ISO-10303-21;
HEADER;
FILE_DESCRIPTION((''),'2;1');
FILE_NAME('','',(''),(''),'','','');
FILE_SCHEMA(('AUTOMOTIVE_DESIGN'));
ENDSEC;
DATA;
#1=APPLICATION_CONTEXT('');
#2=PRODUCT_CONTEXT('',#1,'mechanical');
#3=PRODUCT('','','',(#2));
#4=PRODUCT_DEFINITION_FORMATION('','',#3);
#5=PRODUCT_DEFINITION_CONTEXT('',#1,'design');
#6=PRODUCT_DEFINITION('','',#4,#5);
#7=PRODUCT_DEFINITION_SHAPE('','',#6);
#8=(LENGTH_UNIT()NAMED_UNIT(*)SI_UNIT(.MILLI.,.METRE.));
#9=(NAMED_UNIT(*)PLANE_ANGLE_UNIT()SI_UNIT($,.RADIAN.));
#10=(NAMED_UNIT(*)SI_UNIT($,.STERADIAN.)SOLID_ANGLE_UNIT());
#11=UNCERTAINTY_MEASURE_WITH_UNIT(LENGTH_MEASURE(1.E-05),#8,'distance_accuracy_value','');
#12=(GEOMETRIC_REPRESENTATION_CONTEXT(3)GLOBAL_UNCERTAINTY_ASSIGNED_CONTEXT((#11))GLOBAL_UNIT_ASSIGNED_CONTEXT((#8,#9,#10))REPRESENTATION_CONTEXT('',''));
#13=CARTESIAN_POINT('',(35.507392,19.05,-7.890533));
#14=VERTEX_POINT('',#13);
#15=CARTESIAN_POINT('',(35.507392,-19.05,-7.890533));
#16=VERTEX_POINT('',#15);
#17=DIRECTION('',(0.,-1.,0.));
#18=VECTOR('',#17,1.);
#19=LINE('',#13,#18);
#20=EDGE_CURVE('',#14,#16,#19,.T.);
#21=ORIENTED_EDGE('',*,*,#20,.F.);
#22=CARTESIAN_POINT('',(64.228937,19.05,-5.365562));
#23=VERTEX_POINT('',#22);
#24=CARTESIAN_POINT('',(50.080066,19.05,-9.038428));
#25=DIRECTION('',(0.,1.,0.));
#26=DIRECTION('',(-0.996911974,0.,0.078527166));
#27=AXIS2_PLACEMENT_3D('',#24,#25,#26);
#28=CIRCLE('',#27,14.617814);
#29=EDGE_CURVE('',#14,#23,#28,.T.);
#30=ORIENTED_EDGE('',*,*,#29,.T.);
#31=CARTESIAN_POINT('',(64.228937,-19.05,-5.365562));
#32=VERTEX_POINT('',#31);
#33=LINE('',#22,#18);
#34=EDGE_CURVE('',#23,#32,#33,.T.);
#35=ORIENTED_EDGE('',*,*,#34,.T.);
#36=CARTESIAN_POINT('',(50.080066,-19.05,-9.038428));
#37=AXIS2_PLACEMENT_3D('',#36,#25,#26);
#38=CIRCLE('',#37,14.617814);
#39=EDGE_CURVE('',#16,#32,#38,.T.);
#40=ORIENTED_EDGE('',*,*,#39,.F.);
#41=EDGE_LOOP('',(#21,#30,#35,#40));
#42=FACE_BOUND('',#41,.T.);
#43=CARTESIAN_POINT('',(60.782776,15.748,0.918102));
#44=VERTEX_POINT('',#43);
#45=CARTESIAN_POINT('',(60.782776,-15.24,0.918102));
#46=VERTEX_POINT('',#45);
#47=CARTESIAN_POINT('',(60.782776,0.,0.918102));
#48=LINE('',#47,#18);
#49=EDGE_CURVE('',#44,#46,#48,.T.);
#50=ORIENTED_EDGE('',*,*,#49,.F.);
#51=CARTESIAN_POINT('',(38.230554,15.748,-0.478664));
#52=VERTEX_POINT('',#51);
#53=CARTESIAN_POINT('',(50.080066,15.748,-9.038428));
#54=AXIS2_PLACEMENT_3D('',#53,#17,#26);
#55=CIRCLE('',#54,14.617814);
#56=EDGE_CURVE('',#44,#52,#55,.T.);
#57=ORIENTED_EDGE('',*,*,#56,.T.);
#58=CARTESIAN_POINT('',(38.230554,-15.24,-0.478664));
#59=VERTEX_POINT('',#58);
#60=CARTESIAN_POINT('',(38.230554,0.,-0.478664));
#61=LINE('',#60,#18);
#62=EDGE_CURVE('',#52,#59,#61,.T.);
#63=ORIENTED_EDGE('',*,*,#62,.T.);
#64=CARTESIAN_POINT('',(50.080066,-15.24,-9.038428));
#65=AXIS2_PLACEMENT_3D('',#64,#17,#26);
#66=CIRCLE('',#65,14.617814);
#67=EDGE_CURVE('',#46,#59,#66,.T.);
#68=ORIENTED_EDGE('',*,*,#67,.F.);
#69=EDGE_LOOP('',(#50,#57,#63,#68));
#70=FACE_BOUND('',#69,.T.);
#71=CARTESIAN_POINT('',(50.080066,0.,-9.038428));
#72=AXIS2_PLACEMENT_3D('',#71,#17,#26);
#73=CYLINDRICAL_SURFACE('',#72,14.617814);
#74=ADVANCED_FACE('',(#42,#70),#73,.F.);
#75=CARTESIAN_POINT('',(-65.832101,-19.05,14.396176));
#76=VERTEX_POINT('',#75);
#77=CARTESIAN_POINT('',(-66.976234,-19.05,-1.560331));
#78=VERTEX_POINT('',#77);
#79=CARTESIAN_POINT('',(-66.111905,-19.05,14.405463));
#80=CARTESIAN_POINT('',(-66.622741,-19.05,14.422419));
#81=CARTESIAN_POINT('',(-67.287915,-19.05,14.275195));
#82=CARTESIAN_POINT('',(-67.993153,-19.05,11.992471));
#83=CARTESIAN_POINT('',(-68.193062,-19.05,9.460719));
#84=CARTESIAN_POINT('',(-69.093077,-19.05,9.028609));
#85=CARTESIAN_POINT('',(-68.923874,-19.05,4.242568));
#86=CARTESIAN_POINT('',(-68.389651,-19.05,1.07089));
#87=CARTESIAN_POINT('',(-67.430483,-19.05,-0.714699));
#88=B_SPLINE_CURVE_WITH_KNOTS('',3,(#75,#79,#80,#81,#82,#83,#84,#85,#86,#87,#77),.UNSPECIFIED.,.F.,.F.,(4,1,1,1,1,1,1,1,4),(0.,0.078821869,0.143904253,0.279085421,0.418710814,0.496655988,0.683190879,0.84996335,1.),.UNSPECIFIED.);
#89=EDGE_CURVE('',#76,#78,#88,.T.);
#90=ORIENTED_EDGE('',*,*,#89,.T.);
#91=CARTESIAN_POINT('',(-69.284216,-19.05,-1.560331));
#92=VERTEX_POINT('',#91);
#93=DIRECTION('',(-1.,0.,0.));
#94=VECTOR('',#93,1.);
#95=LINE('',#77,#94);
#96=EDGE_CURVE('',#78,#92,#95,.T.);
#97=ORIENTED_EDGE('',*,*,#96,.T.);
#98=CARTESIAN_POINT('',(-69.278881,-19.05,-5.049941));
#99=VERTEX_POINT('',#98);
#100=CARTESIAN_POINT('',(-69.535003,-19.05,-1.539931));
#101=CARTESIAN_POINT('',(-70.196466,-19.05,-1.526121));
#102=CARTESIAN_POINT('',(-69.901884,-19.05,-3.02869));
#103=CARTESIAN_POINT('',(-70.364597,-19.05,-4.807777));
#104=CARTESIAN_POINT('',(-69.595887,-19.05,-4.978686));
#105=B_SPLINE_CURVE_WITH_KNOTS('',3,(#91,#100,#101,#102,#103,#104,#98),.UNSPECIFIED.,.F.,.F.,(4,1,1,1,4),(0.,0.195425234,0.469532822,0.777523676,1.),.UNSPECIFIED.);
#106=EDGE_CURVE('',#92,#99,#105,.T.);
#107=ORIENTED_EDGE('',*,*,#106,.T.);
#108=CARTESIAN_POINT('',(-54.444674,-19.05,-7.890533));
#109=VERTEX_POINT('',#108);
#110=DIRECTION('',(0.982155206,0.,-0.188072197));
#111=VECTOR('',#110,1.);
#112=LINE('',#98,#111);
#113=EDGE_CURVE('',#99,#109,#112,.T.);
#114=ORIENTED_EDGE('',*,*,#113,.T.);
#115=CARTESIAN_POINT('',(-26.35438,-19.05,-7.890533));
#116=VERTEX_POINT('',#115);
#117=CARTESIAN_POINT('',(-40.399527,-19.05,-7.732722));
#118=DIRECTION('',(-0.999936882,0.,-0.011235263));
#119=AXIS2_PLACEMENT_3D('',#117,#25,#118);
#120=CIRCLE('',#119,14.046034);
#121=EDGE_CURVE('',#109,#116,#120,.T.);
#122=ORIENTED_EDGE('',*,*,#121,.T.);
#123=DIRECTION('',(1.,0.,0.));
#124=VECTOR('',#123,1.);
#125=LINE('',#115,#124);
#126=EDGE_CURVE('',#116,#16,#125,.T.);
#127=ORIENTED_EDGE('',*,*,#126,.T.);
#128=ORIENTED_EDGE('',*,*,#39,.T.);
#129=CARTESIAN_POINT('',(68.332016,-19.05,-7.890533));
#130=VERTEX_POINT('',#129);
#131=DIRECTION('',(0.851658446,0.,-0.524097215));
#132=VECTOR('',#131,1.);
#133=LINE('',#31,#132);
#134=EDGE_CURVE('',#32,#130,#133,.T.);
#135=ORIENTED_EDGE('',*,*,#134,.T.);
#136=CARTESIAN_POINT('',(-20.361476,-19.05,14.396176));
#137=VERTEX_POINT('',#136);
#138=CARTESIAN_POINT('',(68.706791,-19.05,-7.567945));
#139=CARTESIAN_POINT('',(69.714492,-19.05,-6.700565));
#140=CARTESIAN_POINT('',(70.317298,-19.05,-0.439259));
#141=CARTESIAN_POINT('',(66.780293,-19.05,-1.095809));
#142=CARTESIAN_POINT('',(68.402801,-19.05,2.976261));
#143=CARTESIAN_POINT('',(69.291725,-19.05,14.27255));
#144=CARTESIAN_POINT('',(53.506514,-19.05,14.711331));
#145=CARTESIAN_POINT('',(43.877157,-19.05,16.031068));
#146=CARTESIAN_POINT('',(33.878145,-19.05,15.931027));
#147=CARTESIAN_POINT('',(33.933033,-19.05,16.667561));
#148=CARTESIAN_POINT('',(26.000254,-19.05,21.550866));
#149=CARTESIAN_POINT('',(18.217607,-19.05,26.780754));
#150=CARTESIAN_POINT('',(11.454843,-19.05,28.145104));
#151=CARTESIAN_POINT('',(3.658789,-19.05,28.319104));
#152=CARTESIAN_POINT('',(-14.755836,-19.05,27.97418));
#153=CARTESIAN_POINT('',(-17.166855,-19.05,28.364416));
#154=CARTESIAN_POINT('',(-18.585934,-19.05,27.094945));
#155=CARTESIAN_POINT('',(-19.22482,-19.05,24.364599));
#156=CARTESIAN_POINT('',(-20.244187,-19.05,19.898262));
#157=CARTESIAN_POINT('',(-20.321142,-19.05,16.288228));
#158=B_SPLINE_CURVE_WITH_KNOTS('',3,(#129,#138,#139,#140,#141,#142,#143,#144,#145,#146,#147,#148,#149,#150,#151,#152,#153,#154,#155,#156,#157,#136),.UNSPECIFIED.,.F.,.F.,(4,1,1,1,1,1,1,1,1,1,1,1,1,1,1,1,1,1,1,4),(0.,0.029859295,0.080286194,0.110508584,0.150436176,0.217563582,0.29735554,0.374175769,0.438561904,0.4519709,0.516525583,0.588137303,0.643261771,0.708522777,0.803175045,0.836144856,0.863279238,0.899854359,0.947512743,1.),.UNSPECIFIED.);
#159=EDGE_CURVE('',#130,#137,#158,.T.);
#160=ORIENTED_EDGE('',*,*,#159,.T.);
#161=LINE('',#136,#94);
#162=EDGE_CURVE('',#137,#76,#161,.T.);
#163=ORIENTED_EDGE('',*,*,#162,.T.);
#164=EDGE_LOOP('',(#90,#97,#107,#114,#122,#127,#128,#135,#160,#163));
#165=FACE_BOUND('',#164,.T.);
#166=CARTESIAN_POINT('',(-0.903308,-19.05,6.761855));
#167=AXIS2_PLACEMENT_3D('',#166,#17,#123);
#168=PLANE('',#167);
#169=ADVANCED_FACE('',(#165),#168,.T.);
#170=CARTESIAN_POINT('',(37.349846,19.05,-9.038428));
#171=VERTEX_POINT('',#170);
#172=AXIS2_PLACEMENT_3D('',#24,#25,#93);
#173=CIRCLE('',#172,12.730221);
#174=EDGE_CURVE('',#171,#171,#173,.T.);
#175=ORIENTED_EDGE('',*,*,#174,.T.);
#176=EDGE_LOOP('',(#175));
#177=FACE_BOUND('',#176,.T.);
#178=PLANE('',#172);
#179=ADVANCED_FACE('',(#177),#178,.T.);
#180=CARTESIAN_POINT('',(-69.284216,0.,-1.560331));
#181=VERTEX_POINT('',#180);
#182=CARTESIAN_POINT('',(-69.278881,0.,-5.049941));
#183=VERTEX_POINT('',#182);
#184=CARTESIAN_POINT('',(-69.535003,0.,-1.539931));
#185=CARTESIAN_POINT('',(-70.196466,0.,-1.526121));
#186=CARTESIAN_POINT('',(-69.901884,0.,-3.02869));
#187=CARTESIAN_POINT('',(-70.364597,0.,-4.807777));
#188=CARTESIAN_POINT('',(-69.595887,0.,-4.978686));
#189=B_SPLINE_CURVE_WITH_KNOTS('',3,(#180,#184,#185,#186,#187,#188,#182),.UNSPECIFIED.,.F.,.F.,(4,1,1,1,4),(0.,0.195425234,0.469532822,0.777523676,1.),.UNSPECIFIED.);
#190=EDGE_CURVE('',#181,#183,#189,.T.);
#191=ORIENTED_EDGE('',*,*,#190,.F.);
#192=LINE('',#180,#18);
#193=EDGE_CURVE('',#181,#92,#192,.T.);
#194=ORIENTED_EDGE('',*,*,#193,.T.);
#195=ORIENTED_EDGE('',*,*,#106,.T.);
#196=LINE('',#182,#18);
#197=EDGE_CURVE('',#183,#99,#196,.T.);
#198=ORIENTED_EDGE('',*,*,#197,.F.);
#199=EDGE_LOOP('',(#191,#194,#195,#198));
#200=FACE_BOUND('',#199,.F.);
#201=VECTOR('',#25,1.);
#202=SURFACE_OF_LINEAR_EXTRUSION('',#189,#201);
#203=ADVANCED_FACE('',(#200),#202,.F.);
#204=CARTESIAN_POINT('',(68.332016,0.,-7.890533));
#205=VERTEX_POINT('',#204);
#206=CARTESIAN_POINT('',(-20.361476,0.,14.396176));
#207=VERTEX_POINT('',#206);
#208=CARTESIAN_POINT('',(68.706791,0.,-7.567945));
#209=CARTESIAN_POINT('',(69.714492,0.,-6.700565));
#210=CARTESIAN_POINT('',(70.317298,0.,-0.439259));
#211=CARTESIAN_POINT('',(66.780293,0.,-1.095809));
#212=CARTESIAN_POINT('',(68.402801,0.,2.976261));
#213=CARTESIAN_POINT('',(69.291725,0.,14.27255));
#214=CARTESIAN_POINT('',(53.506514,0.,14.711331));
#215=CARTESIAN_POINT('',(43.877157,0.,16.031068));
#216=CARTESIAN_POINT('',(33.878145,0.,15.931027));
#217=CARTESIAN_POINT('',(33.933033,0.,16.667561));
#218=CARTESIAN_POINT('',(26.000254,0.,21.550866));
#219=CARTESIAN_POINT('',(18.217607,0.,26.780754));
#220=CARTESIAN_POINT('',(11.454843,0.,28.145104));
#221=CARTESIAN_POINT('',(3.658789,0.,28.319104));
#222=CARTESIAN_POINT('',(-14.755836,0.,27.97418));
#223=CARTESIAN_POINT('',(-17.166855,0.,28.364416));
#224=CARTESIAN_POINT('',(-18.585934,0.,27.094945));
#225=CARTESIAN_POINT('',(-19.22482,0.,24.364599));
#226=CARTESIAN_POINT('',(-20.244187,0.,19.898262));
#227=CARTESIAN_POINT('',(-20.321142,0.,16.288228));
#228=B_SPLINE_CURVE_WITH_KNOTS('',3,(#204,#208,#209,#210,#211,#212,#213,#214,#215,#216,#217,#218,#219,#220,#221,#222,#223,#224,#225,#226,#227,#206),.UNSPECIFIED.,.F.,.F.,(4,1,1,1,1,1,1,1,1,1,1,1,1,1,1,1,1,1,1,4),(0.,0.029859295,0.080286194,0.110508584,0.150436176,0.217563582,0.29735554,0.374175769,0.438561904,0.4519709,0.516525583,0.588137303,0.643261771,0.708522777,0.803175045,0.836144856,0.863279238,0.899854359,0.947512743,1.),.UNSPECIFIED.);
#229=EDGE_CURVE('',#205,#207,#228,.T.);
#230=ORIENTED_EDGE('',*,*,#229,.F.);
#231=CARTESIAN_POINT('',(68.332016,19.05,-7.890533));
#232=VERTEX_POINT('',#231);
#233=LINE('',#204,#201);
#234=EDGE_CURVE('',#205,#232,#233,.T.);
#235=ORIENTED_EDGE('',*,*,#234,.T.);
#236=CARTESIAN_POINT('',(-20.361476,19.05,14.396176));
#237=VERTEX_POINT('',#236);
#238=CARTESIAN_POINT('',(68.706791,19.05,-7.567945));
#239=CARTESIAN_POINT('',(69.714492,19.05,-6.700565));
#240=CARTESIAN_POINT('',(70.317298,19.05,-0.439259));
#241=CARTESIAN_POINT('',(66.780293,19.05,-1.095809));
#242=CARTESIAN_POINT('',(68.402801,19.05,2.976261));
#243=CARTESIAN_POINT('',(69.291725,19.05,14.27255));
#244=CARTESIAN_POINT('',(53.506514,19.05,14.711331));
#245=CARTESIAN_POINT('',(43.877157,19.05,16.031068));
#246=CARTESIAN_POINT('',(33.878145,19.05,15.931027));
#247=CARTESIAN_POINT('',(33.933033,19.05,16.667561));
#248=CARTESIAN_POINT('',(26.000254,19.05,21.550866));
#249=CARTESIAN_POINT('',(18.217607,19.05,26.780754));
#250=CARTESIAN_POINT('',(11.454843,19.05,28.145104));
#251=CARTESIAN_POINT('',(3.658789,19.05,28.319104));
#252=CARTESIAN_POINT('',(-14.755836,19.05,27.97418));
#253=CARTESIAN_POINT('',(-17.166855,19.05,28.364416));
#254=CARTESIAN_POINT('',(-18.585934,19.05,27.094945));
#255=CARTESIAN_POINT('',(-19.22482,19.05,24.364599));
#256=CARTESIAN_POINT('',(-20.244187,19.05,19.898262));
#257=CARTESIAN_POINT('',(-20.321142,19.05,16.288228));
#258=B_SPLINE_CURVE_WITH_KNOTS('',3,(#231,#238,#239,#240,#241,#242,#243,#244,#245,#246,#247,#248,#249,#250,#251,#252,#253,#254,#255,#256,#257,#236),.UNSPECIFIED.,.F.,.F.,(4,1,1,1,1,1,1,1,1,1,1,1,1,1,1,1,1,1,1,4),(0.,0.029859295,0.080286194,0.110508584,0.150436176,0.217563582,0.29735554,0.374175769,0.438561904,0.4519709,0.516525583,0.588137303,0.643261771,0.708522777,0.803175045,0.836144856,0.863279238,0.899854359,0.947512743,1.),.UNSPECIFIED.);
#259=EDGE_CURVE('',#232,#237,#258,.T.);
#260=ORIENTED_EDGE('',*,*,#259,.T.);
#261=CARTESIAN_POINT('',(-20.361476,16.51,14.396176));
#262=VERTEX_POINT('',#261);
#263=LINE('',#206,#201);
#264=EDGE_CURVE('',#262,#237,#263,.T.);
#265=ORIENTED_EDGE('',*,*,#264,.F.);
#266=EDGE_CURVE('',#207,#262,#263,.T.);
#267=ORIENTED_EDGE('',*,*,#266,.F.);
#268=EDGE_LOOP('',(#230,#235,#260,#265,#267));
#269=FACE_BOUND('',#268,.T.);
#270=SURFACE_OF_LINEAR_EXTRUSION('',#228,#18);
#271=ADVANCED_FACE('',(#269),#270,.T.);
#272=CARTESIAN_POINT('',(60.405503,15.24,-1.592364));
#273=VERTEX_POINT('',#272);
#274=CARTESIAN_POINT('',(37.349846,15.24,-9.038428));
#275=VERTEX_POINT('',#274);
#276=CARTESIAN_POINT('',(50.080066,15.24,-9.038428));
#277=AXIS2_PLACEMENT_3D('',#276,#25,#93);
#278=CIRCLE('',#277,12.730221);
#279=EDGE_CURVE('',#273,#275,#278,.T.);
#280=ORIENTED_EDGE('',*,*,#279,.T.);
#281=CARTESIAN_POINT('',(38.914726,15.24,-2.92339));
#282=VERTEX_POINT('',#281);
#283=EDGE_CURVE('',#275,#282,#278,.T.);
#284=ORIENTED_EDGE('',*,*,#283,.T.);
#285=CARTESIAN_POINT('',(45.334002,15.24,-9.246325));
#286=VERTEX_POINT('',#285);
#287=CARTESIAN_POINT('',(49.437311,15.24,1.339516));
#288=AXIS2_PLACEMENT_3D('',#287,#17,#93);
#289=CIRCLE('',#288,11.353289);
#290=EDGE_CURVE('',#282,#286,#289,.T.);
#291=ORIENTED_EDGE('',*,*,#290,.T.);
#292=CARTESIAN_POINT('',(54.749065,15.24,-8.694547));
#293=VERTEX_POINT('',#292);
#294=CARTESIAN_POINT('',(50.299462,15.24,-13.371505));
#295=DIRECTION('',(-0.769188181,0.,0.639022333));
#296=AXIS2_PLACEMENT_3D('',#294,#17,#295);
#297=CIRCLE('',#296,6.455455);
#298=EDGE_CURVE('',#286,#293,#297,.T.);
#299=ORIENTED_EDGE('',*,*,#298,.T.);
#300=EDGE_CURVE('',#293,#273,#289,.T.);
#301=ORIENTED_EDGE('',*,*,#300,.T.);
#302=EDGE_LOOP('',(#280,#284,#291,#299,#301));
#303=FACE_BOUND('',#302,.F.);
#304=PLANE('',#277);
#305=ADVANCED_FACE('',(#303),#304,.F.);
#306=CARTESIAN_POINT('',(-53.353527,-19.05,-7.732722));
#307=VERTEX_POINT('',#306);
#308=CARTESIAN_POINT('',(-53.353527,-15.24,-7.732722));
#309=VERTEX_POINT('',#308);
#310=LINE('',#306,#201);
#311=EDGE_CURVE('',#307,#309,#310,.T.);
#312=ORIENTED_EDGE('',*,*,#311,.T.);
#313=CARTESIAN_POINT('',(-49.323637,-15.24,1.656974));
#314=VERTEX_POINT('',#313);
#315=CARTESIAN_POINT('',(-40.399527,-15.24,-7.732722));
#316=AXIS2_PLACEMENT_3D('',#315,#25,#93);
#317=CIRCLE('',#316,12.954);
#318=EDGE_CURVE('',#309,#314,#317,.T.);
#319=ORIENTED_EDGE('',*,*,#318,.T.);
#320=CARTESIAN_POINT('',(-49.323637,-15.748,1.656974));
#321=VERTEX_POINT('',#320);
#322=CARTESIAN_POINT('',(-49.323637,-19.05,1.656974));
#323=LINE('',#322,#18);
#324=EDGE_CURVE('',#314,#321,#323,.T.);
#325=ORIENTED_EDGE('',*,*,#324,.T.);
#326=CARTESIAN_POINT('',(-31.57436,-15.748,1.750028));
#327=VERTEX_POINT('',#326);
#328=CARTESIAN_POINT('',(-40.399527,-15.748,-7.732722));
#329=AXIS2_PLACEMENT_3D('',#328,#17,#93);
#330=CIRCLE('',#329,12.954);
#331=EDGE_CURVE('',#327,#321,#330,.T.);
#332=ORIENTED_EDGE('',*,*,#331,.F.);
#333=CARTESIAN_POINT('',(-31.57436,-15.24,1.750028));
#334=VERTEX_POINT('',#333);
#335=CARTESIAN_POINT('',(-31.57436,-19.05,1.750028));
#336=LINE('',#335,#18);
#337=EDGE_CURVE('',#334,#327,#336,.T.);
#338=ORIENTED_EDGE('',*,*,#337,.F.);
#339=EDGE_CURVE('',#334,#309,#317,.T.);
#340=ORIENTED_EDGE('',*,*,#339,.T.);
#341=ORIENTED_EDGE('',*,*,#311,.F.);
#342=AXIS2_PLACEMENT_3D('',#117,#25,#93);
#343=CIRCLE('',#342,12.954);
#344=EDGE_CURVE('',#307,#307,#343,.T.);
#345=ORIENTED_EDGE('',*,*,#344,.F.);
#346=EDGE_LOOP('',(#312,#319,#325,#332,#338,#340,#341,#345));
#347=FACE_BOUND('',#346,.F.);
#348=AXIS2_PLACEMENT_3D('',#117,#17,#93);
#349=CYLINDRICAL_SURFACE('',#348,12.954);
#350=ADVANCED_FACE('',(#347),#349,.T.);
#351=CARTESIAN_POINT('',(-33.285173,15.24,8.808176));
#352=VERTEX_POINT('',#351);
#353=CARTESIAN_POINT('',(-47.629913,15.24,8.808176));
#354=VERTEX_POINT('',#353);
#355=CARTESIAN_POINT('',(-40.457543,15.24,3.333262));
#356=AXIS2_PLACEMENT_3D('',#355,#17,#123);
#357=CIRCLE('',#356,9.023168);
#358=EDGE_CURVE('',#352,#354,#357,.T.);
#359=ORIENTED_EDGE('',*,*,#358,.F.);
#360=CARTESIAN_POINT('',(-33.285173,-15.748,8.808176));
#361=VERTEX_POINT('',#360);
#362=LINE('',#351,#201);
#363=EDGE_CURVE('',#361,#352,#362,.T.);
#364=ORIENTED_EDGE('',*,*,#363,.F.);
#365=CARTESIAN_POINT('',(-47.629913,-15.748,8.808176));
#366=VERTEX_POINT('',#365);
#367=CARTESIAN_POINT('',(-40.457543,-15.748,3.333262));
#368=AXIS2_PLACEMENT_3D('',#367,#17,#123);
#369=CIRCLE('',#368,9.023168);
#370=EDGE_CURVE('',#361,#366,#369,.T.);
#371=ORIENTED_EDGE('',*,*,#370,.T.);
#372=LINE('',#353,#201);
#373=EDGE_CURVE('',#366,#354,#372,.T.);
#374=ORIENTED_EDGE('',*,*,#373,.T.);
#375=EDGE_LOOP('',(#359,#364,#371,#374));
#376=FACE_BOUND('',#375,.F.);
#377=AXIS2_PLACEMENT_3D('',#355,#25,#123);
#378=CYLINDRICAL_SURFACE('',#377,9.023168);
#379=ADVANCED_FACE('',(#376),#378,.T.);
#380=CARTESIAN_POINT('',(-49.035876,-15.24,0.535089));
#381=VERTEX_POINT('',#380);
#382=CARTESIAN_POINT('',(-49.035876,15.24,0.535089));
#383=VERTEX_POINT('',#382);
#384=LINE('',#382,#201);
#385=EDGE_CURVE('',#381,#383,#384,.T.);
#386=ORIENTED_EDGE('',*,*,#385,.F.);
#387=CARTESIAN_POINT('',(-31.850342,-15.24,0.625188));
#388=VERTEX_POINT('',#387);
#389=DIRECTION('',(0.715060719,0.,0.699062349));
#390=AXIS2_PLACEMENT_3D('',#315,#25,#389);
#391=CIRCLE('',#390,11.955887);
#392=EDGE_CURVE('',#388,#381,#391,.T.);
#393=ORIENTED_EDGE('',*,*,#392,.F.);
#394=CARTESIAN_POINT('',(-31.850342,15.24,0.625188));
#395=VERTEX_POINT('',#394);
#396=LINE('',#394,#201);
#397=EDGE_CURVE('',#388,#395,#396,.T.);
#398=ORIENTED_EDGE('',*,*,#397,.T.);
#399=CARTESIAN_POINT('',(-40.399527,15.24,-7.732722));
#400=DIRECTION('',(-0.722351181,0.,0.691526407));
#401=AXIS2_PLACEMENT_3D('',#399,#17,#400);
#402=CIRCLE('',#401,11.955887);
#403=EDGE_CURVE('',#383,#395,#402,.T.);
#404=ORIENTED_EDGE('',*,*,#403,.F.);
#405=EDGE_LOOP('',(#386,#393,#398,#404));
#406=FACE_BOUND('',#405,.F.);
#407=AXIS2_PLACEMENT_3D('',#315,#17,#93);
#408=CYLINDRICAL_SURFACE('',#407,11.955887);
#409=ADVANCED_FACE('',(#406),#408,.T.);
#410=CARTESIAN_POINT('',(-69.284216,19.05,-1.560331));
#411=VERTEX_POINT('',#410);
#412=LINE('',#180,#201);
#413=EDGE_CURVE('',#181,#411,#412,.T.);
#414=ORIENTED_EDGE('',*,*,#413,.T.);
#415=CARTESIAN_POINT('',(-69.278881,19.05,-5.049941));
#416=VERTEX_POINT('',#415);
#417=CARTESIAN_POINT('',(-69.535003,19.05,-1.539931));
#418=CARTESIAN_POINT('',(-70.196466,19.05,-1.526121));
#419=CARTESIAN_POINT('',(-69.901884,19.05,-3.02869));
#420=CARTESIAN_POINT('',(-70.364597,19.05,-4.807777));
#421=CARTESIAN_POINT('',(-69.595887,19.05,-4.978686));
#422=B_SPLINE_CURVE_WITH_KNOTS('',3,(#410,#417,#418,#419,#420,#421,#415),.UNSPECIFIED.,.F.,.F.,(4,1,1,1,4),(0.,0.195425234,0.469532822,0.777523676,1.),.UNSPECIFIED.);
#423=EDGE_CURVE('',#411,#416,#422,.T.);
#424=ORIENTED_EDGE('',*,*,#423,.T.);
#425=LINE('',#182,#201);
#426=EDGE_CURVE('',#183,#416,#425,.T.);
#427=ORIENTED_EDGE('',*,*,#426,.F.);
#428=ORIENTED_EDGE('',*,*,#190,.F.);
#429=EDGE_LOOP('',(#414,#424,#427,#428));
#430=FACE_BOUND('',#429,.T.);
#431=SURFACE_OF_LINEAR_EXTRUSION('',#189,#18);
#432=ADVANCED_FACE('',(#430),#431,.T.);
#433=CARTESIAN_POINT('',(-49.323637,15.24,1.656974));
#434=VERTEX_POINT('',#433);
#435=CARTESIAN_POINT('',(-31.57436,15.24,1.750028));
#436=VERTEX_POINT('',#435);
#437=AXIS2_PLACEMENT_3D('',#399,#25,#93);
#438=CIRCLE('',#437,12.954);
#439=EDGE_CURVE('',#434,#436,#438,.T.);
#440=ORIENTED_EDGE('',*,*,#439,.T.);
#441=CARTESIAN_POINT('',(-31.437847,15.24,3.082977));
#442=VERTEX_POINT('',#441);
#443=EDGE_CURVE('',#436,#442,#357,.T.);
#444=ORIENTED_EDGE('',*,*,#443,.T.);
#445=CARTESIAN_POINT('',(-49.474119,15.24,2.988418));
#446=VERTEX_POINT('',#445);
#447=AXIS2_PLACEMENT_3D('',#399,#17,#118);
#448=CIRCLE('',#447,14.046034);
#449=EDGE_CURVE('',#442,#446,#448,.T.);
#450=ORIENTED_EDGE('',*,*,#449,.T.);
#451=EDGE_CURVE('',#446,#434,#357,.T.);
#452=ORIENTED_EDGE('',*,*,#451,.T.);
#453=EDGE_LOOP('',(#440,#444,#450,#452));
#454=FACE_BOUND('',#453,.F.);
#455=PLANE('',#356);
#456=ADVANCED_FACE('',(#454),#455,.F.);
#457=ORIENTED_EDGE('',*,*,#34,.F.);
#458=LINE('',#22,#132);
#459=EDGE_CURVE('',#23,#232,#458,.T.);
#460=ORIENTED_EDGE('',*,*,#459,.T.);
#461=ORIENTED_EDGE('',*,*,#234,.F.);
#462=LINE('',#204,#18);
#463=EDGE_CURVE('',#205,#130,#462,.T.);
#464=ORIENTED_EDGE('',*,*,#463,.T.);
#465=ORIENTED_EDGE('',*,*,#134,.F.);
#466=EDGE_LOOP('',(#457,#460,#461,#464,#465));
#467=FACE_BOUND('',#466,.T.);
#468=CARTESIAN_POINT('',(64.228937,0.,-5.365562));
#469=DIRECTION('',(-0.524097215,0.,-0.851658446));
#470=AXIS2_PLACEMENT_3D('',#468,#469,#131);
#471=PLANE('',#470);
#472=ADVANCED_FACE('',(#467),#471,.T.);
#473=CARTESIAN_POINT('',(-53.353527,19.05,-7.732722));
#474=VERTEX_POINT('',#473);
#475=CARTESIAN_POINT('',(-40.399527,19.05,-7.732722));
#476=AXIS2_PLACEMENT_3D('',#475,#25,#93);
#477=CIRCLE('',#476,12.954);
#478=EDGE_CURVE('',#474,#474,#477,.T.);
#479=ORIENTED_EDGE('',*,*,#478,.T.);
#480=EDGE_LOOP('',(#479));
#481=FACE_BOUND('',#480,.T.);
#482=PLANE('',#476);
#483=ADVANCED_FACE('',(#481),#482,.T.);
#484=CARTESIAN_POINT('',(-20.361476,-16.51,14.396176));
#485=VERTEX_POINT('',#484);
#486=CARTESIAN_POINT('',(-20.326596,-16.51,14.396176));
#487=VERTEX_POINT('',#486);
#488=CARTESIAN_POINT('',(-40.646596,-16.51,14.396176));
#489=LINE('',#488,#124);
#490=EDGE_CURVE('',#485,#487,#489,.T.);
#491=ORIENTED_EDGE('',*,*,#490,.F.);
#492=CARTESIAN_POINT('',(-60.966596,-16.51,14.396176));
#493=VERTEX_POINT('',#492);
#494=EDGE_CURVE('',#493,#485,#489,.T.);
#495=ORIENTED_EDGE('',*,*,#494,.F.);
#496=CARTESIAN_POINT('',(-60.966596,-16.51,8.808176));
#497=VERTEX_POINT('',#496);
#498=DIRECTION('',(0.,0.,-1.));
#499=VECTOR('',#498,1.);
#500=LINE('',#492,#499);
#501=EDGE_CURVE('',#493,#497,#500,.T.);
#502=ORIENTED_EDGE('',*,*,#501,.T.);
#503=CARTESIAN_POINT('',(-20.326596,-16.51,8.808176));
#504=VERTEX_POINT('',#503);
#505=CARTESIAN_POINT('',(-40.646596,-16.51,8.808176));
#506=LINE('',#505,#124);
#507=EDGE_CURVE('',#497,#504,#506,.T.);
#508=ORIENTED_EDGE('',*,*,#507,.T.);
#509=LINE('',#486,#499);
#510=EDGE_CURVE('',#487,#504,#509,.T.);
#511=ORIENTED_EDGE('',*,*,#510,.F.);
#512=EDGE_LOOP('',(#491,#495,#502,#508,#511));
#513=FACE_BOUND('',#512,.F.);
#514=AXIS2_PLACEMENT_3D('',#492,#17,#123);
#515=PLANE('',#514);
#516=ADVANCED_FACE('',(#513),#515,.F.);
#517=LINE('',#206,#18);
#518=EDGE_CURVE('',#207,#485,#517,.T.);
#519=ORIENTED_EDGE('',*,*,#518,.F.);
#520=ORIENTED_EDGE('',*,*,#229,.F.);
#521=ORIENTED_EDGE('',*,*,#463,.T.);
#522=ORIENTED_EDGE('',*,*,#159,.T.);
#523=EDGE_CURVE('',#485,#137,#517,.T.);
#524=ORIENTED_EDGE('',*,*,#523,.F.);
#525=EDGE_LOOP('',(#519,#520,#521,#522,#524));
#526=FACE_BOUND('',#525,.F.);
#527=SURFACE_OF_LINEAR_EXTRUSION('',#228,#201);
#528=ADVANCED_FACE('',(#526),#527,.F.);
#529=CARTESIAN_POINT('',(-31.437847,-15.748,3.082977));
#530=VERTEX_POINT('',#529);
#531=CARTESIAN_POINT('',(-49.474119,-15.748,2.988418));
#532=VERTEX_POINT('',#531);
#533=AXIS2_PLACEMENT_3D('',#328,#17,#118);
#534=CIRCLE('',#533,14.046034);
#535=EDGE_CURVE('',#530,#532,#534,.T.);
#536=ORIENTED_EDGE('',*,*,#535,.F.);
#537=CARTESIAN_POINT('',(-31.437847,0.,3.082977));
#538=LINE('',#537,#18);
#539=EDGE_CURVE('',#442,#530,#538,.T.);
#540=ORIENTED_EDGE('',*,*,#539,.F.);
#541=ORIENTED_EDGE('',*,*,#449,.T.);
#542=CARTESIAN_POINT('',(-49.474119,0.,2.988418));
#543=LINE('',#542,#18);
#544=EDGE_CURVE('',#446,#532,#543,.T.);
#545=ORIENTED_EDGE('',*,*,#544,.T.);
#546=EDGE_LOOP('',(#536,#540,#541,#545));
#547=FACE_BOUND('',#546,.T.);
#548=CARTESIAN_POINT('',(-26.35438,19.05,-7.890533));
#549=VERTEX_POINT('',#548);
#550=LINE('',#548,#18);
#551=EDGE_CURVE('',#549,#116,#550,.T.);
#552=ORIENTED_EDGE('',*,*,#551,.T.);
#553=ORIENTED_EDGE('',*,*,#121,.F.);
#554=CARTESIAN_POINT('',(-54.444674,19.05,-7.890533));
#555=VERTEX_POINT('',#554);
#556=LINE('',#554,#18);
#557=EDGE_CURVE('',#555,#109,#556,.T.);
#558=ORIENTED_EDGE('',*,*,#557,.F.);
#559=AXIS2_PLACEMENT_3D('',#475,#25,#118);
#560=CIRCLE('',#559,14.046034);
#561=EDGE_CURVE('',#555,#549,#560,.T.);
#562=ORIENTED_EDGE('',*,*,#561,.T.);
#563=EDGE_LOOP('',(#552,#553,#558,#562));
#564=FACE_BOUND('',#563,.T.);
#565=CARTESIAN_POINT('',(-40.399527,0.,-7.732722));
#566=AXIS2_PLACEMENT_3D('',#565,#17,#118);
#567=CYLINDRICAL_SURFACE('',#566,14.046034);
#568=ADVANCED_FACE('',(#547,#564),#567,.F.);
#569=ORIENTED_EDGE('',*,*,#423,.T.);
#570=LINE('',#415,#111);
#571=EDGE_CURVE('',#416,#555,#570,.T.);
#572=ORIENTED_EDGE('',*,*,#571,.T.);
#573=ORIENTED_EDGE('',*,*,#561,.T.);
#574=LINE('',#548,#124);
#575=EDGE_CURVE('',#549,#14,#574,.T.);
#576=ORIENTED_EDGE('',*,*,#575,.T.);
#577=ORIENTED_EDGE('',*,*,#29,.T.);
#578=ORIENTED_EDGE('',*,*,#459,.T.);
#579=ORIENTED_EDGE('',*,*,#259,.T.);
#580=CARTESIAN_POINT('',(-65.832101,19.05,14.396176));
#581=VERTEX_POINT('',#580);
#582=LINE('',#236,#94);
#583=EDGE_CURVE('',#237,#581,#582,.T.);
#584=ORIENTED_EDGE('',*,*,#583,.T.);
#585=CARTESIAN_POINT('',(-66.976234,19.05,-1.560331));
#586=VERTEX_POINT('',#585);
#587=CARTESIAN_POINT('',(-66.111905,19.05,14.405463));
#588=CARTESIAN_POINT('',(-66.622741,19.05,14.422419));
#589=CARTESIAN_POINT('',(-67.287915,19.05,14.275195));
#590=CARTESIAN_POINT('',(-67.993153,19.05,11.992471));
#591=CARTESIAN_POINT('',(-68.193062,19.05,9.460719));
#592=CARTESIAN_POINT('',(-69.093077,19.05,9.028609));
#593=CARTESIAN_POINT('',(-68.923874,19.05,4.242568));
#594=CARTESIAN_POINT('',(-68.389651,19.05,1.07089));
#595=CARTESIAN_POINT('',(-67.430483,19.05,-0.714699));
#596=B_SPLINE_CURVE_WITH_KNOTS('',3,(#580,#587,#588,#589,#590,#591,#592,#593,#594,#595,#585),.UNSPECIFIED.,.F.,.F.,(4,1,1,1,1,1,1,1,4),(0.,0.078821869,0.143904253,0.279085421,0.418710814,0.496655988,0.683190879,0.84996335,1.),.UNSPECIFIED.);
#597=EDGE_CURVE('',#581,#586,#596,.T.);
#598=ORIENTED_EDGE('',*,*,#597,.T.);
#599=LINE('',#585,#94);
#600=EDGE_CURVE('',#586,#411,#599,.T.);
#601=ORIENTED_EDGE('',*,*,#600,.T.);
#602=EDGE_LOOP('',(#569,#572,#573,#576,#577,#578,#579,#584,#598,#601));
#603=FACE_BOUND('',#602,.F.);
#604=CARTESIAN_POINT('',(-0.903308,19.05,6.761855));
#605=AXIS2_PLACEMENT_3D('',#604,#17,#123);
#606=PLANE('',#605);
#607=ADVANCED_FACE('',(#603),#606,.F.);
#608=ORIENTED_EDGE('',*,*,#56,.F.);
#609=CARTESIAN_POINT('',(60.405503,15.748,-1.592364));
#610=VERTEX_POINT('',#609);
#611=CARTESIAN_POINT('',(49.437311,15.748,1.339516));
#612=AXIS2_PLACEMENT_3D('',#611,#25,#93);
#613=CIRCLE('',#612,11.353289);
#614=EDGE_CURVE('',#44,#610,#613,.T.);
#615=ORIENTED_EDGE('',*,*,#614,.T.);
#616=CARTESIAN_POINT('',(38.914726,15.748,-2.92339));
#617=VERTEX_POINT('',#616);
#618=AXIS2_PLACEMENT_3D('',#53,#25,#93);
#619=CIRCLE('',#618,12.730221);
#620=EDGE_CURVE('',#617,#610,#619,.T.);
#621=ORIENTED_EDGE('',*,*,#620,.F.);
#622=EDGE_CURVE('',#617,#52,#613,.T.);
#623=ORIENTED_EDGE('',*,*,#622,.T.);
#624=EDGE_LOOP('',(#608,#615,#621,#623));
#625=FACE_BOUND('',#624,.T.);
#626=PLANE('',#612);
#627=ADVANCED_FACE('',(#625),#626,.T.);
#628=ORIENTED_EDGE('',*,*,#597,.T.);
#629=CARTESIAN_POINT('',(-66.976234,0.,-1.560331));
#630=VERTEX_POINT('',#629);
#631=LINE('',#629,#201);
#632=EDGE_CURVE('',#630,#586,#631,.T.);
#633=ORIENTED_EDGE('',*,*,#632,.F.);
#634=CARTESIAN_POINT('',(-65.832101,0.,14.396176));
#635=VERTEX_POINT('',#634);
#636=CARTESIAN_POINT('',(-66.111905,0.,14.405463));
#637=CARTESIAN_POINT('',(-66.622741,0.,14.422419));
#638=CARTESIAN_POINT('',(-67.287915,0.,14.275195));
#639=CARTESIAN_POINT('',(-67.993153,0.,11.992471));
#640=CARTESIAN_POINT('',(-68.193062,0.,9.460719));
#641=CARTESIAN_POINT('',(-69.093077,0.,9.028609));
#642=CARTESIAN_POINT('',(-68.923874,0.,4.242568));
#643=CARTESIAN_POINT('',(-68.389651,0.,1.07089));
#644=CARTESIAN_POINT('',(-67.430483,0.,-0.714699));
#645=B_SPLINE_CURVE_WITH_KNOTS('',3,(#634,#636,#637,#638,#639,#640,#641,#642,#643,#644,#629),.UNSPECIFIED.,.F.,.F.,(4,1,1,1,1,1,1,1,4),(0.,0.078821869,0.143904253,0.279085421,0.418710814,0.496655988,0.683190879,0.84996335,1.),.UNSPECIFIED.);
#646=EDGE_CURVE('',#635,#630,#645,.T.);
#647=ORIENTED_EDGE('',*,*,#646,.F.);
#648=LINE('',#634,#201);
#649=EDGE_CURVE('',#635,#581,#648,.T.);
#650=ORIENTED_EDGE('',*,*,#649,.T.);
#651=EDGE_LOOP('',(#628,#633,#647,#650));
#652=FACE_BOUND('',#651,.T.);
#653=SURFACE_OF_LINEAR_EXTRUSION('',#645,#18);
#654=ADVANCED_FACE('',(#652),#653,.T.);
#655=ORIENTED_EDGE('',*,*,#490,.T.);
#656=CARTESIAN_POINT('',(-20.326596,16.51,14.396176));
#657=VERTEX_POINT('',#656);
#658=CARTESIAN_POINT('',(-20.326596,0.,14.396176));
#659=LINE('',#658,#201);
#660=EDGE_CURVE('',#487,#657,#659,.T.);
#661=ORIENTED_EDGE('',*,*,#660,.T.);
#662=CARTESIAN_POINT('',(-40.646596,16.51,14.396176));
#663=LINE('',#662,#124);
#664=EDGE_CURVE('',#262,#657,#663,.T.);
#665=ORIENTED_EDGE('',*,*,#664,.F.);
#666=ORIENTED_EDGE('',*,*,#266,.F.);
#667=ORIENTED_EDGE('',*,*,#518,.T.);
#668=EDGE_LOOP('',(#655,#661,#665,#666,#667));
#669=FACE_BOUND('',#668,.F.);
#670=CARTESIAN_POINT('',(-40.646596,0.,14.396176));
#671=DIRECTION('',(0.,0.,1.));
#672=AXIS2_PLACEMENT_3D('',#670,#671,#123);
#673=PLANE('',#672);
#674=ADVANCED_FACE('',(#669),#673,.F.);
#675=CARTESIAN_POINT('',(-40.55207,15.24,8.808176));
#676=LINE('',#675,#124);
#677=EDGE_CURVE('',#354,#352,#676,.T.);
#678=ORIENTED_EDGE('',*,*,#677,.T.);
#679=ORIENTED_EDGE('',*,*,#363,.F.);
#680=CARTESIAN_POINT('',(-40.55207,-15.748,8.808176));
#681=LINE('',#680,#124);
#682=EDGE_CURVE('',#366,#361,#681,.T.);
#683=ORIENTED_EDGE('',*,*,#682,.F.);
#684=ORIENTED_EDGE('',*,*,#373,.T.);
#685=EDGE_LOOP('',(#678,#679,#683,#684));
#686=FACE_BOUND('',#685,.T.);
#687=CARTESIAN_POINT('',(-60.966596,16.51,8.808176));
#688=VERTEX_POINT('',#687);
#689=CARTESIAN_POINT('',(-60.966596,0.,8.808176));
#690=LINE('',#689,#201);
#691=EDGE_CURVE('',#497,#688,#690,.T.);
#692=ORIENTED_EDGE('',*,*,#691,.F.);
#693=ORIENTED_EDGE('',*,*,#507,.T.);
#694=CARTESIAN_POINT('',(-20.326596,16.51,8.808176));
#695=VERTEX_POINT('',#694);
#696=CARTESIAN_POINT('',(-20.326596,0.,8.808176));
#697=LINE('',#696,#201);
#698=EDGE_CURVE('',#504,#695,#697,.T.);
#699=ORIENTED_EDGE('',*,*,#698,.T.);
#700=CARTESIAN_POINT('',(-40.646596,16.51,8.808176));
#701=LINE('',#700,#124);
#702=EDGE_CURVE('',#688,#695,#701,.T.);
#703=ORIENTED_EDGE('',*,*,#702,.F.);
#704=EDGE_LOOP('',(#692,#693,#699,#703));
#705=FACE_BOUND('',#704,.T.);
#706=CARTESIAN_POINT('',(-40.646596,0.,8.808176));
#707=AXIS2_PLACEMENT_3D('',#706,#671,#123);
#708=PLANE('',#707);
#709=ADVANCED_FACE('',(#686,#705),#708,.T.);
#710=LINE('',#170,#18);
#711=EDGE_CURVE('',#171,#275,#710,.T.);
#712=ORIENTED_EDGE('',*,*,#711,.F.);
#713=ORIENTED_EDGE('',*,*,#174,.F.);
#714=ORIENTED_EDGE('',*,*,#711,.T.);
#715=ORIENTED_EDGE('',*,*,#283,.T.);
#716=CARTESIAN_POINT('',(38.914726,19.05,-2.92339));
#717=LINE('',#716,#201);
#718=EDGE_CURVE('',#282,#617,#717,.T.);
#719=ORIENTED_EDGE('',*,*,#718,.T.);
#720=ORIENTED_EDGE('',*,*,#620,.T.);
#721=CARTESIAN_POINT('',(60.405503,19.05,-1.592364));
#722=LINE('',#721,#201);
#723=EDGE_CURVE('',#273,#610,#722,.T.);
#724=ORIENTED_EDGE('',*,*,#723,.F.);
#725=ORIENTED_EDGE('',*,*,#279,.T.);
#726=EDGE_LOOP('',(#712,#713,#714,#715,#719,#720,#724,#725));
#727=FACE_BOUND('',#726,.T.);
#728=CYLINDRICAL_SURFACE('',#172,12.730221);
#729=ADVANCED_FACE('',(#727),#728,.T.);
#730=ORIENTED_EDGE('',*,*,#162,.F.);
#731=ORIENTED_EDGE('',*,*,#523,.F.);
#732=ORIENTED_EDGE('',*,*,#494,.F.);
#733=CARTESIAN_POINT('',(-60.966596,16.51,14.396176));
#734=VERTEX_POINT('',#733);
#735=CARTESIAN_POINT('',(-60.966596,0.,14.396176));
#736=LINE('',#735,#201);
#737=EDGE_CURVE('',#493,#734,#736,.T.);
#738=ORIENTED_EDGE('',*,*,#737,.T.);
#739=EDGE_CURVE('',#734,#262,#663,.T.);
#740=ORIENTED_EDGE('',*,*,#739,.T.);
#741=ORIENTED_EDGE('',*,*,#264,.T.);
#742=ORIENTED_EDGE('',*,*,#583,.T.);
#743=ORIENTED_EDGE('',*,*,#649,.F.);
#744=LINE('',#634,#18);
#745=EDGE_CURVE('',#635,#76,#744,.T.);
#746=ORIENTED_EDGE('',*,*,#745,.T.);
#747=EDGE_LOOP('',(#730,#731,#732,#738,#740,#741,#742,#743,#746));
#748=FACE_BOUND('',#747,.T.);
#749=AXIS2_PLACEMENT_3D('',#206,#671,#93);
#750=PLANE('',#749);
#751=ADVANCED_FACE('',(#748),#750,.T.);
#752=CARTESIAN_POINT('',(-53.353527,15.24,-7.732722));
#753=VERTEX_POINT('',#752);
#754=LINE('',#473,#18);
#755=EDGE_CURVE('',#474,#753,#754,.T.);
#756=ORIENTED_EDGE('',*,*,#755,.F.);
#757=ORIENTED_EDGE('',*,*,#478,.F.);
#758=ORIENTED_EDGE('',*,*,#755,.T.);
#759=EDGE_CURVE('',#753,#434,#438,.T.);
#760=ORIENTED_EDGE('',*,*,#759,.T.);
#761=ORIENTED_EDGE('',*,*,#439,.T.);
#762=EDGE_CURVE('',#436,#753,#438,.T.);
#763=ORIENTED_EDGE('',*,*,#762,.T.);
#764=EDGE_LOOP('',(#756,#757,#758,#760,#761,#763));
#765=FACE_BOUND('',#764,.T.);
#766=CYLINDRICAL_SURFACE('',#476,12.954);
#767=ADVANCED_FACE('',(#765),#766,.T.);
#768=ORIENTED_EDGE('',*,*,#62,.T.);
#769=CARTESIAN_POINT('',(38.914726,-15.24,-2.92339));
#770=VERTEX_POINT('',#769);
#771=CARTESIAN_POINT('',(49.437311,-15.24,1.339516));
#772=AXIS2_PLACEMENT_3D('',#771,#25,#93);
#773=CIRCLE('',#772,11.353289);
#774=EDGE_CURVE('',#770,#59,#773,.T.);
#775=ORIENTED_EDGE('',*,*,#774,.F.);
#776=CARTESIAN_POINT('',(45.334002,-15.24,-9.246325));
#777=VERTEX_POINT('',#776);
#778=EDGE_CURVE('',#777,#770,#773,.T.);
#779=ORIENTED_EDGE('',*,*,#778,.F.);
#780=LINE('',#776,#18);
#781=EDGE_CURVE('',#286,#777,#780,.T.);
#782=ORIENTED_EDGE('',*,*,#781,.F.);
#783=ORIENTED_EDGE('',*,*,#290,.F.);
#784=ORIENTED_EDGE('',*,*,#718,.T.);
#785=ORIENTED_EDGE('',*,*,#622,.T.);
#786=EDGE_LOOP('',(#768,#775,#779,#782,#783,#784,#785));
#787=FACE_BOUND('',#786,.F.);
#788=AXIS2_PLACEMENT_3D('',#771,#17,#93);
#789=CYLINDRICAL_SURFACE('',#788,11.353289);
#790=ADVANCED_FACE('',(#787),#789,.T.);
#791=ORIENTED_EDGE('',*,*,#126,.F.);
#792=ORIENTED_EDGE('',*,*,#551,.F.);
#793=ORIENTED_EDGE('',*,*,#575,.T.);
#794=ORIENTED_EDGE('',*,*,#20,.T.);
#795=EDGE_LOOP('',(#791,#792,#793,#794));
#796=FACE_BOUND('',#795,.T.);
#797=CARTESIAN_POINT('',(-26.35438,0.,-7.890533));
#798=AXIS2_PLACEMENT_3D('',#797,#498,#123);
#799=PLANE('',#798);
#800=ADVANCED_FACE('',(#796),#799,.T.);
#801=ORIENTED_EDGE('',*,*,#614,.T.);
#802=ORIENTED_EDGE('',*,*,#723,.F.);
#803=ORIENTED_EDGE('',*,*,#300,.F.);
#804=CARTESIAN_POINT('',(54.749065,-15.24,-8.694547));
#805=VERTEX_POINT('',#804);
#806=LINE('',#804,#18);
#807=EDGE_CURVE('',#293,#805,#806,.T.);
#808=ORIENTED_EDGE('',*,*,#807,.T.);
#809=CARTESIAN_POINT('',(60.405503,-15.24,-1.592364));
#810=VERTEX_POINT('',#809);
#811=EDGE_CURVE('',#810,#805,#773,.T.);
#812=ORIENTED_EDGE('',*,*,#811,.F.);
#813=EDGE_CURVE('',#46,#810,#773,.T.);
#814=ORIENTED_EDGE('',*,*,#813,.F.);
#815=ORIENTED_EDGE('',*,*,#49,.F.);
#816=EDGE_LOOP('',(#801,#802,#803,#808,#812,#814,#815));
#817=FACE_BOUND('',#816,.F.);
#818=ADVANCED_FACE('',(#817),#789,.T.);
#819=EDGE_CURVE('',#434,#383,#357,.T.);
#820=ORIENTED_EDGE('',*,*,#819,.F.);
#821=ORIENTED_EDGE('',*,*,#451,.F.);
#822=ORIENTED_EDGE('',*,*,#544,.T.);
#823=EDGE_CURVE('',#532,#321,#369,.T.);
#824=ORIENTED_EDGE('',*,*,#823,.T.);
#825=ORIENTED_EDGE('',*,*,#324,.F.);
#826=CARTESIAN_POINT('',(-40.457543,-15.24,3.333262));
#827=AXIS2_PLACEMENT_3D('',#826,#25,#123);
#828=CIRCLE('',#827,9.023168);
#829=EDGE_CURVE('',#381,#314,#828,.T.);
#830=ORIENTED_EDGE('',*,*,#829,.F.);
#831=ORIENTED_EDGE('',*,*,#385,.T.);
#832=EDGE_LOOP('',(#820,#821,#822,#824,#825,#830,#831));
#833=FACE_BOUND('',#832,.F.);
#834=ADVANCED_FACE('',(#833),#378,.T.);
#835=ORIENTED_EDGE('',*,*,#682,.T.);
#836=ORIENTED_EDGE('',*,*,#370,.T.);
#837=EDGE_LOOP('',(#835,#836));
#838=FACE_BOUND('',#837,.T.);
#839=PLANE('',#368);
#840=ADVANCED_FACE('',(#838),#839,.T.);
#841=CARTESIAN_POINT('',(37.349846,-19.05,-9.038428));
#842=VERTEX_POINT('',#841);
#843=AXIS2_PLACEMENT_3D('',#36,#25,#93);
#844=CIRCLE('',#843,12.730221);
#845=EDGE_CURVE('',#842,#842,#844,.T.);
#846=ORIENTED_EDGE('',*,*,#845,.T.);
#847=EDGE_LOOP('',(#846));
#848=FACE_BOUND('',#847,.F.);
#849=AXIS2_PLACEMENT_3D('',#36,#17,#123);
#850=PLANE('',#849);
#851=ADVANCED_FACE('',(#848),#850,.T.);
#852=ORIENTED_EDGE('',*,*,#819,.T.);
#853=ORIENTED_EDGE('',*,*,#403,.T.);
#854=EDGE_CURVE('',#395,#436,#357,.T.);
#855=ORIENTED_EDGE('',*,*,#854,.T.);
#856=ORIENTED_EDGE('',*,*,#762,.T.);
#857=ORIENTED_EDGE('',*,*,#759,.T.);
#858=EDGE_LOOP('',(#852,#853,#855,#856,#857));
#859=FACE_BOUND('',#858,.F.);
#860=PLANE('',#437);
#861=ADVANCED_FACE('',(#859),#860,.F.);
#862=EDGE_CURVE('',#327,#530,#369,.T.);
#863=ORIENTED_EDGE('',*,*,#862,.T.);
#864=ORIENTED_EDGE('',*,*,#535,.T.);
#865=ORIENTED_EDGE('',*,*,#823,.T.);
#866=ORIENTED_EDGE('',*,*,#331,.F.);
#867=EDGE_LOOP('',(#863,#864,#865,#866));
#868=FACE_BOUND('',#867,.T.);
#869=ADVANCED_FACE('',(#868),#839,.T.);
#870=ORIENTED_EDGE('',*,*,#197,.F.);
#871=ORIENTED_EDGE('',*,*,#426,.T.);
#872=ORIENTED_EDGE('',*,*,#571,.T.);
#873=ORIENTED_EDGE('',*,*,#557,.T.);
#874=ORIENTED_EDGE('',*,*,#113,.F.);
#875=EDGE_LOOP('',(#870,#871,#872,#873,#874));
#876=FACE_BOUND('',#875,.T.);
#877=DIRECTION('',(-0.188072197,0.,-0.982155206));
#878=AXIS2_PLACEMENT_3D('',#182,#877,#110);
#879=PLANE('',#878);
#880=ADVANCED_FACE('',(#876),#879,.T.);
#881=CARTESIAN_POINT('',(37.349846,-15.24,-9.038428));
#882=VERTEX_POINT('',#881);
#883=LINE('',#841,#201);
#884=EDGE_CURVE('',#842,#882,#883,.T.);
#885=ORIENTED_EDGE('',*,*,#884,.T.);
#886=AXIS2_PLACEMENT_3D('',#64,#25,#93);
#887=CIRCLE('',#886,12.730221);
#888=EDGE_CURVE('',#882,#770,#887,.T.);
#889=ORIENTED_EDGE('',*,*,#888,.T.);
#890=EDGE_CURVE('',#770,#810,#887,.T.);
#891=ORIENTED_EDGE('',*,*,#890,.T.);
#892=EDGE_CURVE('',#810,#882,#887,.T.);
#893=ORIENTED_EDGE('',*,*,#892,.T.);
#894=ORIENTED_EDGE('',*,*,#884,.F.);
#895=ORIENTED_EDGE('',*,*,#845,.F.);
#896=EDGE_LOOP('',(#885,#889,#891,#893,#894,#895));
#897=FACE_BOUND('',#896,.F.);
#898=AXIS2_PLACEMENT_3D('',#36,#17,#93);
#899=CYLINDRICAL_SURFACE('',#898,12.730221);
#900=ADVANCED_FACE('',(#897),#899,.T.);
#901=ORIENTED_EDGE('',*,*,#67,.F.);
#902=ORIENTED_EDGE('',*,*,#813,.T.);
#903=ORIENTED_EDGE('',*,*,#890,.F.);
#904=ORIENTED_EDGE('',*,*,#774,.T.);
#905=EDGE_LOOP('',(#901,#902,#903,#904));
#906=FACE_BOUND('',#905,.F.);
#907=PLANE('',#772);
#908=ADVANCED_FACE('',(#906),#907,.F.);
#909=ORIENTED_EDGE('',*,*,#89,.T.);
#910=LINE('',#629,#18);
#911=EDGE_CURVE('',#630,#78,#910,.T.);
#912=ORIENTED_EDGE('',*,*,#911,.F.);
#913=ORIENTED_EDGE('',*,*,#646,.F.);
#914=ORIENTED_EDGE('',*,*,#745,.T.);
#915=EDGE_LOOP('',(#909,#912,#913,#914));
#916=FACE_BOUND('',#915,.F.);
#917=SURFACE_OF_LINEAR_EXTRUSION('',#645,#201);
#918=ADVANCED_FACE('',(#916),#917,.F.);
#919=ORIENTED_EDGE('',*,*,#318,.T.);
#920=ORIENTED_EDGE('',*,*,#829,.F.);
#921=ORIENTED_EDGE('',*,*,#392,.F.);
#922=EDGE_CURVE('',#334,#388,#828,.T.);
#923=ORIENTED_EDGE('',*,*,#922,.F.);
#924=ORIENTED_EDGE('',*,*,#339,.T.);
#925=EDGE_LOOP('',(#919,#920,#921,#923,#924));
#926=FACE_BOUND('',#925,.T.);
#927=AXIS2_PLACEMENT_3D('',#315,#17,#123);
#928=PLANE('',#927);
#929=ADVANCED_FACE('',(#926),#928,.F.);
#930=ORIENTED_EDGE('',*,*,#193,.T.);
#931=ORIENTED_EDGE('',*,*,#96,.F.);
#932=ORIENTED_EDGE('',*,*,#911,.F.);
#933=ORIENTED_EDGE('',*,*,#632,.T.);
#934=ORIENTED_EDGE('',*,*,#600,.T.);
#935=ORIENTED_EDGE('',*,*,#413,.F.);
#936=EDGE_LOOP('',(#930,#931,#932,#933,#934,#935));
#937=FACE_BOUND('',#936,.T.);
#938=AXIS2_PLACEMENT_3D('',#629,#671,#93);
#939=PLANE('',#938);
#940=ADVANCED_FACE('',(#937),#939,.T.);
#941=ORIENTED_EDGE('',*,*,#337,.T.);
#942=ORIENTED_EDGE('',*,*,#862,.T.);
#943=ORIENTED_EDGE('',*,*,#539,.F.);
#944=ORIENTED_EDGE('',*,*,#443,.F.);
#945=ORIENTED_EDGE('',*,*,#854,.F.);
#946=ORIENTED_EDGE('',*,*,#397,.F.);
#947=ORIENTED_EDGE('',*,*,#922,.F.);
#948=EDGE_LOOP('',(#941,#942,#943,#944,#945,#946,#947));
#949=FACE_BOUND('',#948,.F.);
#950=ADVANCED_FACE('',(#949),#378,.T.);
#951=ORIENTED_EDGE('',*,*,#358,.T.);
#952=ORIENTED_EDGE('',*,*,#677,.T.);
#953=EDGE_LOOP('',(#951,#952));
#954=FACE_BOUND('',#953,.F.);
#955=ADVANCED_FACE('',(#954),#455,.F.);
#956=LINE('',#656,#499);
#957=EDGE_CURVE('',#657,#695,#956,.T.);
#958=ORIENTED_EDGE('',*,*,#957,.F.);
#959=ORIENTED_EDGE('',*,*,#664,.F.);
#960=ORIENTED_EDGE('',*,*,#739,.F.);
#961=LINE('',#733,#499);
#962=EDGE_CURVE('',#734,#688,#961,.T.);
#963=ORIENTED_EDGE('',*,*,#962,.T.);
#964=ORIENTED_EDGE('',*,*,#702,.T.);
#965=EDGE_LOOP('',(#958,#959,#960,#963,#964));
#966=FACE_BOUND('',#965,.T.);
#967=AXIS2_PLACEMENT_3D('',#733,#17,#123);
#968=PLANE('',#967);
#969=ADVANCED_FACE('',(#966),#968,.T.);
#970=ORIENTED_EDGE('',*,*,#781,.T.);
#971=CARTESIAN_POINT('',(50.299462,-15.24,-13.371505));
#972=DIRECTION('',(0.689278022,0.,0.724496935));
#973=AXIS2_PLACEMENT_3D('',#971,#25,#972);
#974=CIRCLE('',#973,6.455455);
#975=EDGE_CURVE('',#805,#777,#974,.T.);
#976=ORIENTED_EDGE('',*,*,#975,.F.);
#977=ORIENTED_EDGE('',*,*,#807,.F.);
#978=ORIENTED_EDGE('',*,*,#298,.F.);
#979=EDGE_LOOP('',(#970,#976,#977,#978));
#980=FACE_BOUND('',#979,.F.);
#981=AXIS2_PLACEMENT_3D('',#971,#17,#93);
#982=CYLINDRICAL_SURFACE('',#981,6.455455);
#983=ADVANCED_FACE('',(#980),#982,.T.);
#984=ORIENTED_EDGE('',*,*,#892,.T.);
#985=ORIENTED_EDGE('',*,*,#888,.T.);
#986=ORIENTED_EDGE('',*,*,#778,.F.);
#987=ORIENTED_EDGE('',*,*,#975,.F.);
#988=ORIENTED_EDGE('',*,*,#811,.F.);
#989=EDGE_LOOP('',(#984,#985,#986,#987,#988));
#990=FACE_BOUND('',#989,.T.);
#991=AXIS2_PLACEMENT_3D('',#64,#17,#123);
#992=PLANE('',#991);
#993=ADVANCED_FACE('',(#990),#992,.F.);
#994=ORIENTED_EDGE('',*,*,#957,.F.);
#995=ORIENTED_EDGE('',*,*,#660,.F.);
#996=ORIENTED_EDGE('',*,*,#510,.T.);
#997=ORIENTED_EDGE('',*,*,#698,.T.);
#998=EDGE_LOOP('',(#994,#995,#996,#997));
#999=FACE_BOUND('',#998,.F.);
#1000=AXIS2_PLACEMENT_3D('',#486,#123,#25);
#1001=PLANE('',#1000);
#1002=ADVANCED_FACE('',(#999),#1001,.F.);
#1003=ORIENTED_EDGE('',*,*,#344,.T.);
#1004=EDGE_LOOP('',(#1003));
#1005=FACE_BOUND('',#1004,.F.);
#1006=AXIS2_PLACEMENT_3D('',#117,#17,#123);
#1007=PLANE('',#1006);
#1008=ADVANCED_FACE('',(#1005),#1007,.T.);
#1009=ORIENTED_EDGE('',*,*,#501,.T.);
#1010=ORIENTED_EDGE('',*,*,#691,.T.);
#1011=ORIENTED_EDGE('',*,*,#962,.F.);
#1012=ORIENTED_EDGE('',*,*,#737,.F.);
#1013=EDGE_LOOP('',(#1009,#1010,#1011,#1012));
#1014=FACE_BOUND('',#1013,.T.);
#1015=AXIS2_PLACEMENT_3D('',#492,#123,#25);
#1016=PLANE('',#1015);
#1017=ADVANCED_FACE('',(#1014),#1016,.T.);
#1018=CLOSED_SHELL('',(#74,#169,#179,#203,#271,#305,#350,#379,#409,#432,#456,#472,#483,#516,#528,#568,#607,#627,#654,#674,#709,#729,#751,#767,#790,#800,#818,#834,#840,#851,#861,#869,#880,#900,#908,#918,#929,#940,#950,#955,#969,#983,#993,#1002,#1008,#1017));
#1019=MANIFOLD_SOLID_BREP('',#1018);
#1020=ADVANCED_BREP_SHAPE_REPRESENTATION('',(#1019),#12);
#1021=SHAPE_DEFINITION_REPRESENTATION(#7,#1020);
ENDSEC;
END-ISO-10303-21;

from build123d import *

# Parameters (mm, degrees)
F1_DEPTH  = 19.05
F2_W      = 40.64
F2_H      = 33.02
F3_DEPTH  = 5.588
F4_R      = 12.9540001242
F5_DEPTH  = 3.81
F4_R_2    = 12.7302206493
F9_R      = 9.0231683156
F10_DEPTH = 30.988
F11_R     = 11.353288786
F12_DEPTH = 30.988
F13_R     = 11.9558866418
F14_DEPTH = 32.258
F15_R     = 6.4554552036
F16_DEPTH = 30.734


with BuildPart() as f1:
    # F0 (on Front) → F1 (new body, symmetric)
    with BuildSketch(Plane.XZ):
        with BuildLine():
            add(Edge.make_bspline(
                [(-69.2842155695, -1.5603305073), (-69.5350025172, -1.5399307664), (-70.1964658552, -1.526121286), (-69.9018841173, -3.0286902092), (-70.3645967063, -4.8077768479), (-69.5958865333, -4.978686168), (-69.2788809538, -5.04994113)],
                knots=[0, 0, 0, 0, 0.1954252336, 0.4695328217, 0.7775236757, 1, 1, 1, 1], degree=3))
            Line((-69.2788809538, -5.04994113), (-54.4446744025, -7.8905327246))
            ThreePointArc((-54.4446744025, -7.8905327246), (-40.3995271772, 6.3133119394), (-26.354379952, -7.8905327246))
            Line((-26.354379952, -7.8905327246), (35.5073921382, -7.8905327246))
            ThreePointArc((35.5073921382, -7.8905327246), (48.7999211019, 5.5232241619), (64.2289370298, -5.3655621596))
            Line((64.2289370298, -5.3655621596), (68.332016468, -7.8905327246))
            add(Edge.make_bspline(
                [(68.332016468, -7.8905327246), (68.7067913051, -7.5679449616), (69.714492426, -6.7005653561), (70.3172984159, -0.4392585426), (66.7802927419, -1.0958089063), (68.4028013282, 2.9762612334), (69.2917253521, 14.2725497335), (53.5065140597, 14.7113305441), (43.8771565321, 16.0310681315), (33.8781446405, 15.9310273294), (33.9330328582, 16.6675611215), (26.0002542616, 21.5508658082), (18.2176068002, 26.7807544456), (11.4548434095, 28.1451041805), (3.6587892983, 28.3191044585), (-14.7558362833, 27.9741795524), (-17.1668552051, 28.3644164723), (-18.5859335818, 27.0949449022), (-19.2248198393, 24.36459907), (-20.2441867929, 19.8982618034), (-20.3211424661, 16.2882279072), (-20.3614756465, 14.3961757421)],
                knots=[0, 0, 0, 0, 0.0298592954, 0.0802861944, 0.110508584, 0.1504361757, 0.217563582, 0.2973555397, 0.3741757692, 0.438561904, 0.4519709004, 0.5165255825, 0.5881373031, 0.6432617714, 0.7085227769, 0.8031750452, 0.8361448558, 0.8632792375, 0.8998543586, 0.9475127428, 1, 1, 1, 1], degree=3))
            Line((-20.3614756465, 14.3961757421), (-65.8321008086, 14.3961757421))
            add(Edge.make_bspline(
                [(-65.8321008086, 14.3961757421), (-66.1119049823, 14.4054631172), (-66.6227405068, 14.4224189798), (-67.2879149417, 14.2751954831), (-67.9931529597, 11.9924706508), (-68.1930622811, 9.4607186493), (-69.0930767314, 9.0286087442), (-68.9238735496, 4.2425680846), (-68.3896505368, 1.0708895061), (-67.4304833389, -0.7146991208), (-66.9762343168, -1.5603305073)],
                knots=[0, 0, 0, 0, 0.0788218688, 0.1439042534, 0.2790854206, 0.4187108143, 0.4966559878, 0.6831908786, 0.8499633496, 1, 1, 1, 1], degree=3))
            Line((-66.9762343168, -1.5603305073), (-69.2842155695, -1.5603305073))
        make_face()
    extrude(amount=F1_DEPTH, both=True)

    # F2 (on face) → F3 (cut)
    with BuildSketch(Plane.XY.offset(14.3961757421)):
        with Locations((-40.6465960781, 0)):
            Rectangle(F2_W, F2_H)
    extrude(amount=-F3_DEPTH, mode=Mode.SUBTRACT)



with BuildPart() as f5:
    # F4 (on face) → F5 (new body)
    with BuildSketch(Plane(origin=(0, 19.05, 0), x_dir=(-1, 0, 0), z_dir=(0, 1, 0))):
        with Locations((40.3995271772, -7.7327218372)):
            Circle(F4_R)
    extrude(amount=-F5_DEPTH)


with BuildPart() as f5b:
    # F4 (on face) → F5, piece 2 (new body)
    with BuildSketch(Plane(origin=(0, 19.05, 0), x_dir=(-1, 0, 0), z_dir=(0, 1, 0))):
        with Locations((-50.0800661584, -9.0384282465)):
            Circle(F4_R_2)
    extrude(amount=-F5_DEPTH)


with BuildPart() as f6_1:
    # F6: instance of F5
    add(f5.part.mirror(Plane.XZ))


with BuildPart() as f6_2:
    # F6: instance of F5b
    add(f5b.part.mirror(Plane.XZ))


with BuildPart() as f1_1:
    add(f1.part)

    add(f5.part)  # F10 merges F5

    add(f6_1.part)  # F10 merges F6_1
    # F9 (on face) → F10 (join)
    with BuildSketch(Plane.XZ.offset(-15.24)):
        with Locations((-40.4575429857, 3.333261935)):
            Circle(F9_R)
    extrude(amount=F10_DEPTH)


    add(f5b.part)  # F12 merges F5b

    add(f6_2.part)  # F12 merges F6_2
    # F11 (on face) → F12 (join)
    with BuildSketch(Plane(origin=(0, -15.24, 0), x_dir=(-1, 0, 0), z_dir=(0, 1, 0))):
        with Locations((-49.4373105466, 1.3395160204)):
            Circle(F11_R)
    extrude(amount=F12_DEPTH)

    # F13 (on face) → F14 (join)
    with BuildSketch(Plane(origin=(0, -15.24, 0), x_dir=(-1, 0, 0), z_dir=(0, 1, 0))):
        with Locations((40.3995271772, -7.7327218372)):
            Circle(F13_R)
    extrude(amount=F14_DEPTH)

    # F15 (on face) → F16 (join)
    with BuildSketch(Plane(origin=(0, -15.24, 0), x_dir=(-1, 0, 0), z_dir=(0, 1, 0))):
        with Locations((-50.299461931, -13.3715048432)):
            Circle(F15_R)
    extrude(amount=F16_DEPTH)


solid = f1_1.part
